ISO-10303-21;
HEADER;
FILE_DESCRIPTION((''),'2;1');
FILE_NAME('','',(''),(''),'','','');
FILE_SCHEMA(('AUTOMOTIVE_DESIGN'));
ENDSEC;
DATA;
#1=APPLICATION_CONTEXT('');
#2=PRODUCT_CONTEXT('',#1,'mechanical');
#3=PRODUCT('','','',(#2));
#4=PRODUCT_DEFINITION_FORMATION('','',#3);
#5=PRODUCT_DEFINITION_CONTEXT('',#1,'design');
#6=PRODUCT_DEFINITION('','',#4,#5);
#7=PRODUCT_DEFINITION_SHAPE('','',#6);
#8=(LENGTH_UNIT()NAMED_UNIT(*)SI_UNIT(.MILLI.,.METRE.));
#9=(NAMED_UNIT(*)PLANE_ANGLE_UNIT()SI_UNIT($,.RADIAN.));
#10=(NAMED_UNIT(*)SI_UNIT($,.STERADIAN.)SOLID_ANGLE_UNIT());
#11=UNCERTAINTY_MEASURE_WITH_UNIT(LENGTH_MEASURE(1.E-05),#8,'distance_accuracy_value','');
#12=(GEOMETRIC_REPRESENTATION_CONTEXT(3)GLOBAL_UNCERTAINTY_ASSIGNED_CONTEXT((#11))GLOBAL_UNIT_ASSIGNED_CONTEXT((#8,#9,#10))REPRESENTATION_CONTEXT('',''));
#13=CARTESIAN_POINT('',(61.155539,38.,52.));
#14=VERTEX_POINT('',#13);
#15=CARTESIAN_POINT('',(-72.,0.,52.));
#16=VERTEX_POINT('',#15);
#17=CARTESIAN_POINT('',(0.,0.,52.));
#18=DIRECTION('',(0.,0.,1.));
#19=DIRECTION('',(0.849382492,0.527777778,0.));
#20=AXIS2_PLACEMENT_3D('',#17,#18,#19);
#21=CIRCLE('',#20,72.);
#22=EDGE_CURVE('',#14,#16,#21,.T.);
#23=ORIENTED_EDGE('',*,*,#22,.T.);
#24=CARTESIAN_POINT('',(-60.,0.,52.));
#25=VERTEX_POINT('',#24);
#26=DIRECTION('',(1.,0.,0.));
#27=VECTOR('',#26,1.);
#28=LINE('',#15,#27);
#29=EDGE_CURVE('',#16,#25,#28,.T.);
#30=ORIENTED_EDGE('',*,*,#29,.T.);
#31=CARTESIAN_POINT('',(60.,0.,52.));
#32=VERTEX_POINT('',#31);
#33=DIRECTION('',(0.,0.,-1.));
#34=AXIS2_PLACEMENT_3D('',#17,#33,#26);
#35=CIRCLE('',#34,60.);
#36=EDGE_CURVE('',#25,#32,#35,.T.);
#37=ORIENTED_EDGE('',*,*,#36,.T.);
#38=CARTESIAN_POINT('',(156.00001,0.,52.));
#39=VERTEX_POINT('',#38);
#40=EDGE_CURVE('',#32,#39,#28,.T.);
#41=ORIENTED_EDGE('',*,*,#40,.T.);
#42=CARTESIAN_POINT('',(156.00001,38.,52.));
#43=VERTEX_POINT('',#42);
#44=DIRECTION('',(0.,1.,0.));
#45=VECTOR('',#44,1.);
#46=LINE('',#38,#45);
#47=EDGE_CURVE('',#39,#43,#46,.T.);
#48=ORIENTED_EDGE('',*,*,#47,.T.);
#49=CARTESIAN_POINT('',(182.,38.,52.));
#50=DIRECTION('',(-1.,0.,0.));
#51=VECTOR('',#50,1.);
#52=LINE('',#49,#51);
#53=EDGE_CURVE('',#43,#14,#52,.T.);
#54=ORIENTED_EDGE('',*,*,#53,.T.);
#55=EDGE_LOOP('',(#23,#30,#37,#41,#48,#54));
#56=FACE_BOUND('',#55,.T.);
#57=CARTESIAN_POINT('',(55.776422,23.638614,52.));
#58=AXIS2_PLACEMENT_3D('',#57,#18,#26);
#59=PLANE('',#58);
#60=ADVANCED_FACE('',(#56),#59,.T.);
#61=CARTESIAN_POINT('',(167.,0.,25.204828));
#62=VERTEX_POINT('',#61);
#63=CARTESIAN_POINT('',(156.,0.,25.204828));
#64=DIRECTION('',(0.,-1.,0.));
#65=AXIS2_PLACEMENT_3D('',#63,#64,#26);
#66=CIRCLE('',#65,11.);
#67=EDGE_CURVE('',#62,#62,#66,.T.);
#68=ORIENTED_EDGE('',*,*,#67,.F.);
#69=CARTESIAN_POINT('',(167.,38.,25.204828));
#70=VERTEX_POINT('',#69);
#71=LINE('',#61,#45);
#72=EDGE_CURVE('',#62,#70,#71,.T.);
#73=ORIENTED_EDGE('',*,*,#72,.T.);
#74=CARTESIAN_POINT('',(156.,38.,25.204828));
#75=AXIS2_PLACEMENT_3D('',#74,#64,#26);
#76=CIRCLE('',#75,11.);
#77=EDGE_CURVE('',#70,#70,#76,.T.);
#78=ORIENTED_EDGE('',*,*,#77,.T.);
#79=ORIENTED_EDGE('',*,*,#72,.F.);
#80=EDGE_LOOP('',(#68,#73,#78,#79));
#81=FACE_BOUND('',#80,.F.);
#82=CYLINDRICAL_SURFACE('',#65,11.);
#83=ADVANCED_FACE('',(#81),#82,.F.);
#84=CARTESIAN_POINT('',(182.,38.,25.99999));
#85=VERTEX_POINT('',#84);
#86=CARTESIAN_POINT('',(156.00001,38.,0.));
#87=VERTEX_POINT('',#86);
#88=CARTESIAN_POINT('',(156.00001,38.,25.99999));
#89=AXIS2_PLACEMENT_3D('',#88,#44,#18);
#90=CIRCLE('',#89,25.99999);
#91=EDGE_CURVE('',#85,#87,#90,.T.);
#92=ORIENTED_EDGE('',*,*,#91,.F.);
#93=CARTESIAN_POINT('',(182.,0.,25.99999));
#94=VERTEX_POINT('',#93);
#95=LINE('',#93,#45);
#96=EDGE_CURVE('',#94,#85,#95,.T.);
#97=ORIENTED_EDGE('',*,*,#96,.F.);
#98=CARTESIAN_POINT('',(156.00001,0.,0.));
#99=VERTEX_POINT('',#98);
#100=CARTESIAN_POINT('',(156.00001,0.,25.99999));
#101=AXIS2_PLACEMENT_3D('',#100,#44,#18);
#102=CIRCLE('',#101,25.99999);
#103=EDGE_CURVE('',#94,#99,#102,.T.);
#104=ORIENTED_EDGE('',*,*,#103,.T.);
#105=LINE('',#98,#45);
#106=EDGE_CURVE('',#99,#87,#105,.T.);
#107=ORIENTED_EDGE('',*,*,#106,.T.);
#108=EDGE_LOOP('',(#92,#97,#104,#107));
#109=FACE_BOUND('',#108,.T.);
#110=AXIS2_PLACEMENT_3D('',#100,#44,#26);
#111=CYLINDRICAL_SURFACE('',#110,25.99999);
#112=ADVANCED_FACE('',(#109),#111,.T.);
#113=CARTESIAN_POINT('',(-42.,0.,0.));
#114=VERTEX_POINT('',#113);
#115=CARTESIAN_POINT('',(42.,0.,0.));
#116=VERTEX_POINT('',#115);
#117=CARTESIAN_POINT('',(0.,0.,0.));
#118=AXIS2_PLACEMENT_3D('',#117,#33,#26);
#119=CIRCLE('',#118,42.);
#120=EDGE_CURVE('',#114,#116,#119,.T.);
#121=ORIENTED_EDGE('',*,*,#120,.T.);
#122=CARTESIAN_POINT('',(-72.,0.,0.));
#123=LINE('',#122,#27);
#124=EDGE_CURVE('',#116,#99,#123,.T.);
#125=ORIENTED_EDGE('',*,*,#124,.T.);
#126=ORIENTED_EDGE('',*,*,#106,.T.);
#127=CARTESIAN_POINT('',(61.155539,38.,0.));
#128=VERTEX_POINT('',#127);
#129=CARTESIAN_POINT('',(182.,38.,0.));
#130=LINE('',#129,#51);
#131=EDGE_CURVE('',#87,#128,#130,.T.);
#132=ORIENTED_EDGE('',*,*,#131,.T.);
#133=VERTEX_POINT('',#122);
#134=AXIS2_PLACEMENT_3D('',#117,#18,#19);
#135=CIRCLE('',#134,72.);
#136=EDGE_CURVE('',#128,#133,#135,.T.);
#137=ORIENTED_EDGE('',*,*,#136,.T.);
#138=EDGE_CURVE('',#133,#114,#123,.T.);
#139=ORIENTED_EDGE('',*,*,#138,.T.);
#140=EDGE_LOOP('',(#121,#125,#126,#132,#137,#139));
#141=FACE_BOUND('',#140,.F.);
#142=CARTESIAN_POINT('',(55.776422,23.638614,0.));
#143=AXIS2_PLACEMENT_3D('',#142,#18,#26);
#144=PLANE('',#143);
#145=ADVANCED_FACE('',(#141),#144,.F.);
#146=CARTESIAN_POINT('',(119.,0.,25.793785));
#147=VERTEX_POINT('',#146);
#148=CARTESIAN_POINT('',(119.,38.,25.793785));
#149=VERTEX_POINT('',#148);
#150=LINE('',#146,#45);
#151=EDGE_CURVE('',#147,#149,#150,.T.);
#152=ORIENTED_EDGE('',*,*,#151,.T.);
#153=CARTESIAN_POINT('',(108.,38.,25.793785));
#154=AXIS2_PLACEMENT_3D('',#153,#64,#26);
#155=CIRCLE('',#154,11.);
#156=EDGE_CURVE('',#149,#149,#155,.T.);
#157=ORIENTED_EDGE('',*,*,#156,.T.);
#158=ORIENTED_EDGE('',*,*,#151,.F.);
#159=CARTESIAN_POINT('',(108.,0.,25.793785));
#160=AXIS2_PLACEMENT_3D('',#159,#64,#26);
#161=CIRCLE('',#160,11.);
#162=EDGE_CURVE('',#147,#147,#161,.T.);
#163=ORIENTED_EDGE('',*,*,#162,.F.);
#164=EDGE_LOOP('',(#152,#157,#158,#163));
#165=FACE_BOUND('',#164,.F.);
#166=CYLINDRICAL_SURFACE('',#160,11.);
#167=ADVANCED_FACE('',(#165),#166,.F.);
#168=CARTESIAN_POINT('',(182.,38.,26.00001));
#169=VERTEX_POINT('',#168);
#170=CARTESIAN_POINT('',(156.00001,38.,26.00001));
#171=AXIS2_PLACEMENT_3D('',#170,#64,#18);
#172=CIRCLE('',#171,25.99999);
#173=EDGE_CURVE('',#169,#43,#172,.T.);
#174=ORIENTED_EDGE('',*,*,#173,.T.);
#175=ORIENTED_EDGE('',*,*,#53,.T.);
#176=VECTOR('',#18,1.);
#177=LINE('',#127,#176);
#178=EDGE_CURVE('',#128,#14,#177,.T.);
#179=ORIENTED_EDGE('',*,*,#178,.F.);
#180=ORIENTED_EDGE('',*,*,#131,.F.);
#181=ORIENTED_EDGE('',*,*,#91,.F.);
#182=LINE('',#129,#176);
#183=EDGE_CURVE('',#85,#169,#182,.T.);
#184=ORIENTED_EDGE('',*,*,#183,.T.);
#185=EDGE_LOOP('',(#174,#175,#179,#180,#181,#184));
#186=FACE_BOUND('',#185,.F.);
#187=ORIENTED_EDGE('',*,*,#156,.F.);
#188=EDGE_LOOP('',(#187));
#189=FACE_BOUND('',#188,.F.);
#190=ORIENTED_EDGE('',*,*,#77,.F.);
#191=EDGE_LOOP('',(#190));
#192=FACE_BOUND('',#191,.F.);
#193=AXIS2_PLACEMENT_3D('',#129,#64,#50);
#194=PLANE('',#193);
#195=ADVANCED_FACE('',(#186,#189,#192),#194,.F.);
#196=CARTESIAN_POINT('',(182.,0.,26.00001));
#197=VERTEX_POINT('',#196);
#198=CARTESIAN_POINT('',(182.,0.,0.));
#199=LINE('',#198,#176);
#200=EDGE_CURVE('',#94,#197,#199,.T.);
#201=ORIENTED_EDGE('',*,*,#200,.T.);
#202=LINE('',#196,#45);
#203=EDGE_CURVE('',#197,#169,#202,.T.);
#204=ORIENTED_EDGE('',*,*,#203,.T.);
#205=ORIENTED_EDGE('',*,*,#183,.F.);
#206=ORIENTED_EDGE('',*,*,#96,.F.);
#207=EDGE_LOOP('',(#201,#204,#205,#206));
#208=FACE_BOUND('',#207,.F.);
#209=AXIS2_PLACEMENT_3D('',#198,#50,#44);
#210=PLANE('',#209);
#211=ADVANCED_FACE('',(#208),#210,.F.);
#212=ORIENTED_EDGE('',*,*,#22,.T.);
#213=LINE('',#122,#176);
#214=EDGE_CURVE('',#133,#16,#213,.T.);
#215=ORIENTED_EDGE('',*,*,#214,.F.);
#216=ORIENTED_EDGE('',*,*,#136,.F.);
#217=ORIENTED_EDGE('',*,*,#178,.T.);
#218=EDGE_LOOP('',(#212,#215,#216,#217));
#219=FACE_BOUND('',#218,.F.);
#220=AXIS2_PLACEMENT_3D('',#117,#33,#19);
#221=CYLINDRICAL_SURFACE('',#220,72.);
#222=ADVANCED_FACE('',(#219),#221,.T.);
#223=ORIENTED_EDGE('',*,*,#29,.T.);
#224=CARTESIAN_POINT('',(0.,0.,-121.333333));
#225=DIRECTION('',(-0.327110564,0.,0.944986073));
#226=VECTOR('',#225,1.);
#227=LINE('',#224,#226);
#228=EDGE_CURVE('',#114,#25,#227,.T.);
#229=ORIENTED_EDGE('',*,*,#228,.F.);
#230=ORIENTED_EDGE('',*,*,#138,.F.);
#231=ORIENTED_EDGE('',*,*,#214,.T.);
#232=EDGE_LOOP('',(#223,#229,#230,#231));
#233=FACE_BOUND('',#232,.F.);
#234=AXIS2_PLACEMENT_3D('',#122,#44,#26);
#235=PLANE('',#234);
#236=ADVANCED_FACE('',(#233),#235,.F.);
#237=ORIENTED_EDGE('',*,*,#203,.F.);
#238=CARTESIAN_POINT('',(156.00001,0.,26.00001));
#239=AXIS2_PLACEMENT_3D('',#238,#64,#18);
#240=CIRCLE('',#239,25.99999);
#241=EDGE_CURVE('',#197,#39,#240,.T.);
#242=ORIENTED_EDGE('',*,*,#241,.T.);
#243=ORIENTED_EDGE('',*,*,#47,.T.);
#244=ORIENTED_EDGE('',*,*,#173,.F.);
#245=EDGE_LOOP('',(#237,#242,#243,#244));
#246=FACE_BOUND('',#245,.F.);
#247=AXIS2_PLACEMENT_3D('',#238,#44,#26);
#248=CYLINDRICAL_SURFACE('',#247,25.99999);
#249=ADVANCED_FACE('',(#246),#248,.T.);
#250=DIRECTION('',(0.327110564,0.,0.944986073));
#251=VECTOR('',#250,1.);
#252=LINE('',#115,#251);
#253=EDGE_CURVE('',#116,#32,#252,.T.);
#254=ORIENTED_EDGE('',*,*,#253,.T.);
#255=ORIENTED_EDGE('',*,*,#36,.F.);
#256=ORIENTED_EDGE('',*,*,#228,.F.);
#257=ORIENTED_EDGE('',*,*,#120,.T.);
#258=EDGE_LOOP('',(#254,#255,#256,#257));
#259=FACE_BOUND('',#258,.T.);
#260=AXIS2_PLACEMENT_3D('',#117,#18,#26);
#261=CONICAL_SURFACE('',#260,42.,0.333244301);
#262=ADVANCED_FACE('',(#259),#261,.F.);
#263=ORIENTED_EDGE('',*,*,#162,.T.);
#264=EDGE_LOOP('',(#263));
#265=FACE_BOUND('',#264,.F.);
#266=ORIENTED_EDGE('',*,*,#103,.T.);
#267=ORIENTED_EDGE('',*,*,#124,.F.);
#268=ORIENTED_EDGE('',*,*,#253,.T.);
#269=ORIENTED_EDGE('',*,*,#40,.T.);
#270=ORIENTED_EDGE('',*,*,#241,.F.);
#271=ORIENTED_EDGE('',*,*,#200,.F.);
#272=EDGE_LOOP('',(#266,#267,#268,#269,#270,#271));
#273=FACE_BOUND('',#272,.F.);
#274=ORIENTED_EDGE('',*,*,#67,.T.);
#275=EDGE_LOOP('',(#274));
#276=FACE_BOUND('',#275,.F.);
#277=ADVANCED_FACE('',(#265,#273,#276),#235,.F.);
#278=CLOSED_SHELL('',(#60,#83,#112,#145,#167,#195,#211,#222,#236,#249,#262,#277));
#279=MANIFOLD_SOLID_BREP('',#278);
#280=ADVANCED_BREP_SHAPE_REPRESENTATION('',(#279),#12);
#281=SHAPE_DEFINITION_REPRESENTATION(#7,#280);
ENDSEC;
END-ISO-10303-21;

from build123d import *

# Parameters (mm, degrees)
F1_DEPTH = 52
F4_R     = 11
F5_DEPTH = 38
F6_R     = 25.99999


# Not quite as in the source:
# - a fillet or chamfer is up to 0.001 mm smaller than in the source, because OpenCascade refuses the exact size


with BuildPart() as f1:
    # F0 (on Top) → F1 (new body)
    with BuildSketch(Plane.XY):
        with BuildLine():
            Line((182, 38), (61.1555394057, 38))
            ThreePointArc((61.1555394057, 38), (-19.7585571689, 69.2358246763), (-72, 0))
            Line((-72, 0), (182, 0))
            Line((182, 0), (182, 38))
        make_face()
    extrude(amount=F1_DEPTH)

    # F2 (on face) → F3 (revolve, cut)
    with BuildSketch(Plane.XZ):
        Polygon((60, 52), (0, 52), (0, 0), (42, 0), align=None)
    revolve(axis=Axis((0, 0, 26), (0, 0, -1)), mode=Mode.SUBTRACT)

    # F4 (on face) → F5 (cut)
    with BuildSketch(Plane.XZ):
        with Locations((108, 25.7937852293)):
            Circle(F4_R)
        with Locations((156, 25.2048280338)):
            Circle(F4_R)
    extrude(amount=-F5_DEPTH, mode=Mode.SUBTRACT)

    # F6 (radius 26 in the source; OpenCascade refuses exactly that, so slightly less here)
    f6_edges = [f1.edges().sort_by_distance(p)[0] for p in [
        (182, 19, 52),
        (182, 19, 0),
    ]]
    fillet(f6_edges, radius=F6_R)


solid = f1.part
